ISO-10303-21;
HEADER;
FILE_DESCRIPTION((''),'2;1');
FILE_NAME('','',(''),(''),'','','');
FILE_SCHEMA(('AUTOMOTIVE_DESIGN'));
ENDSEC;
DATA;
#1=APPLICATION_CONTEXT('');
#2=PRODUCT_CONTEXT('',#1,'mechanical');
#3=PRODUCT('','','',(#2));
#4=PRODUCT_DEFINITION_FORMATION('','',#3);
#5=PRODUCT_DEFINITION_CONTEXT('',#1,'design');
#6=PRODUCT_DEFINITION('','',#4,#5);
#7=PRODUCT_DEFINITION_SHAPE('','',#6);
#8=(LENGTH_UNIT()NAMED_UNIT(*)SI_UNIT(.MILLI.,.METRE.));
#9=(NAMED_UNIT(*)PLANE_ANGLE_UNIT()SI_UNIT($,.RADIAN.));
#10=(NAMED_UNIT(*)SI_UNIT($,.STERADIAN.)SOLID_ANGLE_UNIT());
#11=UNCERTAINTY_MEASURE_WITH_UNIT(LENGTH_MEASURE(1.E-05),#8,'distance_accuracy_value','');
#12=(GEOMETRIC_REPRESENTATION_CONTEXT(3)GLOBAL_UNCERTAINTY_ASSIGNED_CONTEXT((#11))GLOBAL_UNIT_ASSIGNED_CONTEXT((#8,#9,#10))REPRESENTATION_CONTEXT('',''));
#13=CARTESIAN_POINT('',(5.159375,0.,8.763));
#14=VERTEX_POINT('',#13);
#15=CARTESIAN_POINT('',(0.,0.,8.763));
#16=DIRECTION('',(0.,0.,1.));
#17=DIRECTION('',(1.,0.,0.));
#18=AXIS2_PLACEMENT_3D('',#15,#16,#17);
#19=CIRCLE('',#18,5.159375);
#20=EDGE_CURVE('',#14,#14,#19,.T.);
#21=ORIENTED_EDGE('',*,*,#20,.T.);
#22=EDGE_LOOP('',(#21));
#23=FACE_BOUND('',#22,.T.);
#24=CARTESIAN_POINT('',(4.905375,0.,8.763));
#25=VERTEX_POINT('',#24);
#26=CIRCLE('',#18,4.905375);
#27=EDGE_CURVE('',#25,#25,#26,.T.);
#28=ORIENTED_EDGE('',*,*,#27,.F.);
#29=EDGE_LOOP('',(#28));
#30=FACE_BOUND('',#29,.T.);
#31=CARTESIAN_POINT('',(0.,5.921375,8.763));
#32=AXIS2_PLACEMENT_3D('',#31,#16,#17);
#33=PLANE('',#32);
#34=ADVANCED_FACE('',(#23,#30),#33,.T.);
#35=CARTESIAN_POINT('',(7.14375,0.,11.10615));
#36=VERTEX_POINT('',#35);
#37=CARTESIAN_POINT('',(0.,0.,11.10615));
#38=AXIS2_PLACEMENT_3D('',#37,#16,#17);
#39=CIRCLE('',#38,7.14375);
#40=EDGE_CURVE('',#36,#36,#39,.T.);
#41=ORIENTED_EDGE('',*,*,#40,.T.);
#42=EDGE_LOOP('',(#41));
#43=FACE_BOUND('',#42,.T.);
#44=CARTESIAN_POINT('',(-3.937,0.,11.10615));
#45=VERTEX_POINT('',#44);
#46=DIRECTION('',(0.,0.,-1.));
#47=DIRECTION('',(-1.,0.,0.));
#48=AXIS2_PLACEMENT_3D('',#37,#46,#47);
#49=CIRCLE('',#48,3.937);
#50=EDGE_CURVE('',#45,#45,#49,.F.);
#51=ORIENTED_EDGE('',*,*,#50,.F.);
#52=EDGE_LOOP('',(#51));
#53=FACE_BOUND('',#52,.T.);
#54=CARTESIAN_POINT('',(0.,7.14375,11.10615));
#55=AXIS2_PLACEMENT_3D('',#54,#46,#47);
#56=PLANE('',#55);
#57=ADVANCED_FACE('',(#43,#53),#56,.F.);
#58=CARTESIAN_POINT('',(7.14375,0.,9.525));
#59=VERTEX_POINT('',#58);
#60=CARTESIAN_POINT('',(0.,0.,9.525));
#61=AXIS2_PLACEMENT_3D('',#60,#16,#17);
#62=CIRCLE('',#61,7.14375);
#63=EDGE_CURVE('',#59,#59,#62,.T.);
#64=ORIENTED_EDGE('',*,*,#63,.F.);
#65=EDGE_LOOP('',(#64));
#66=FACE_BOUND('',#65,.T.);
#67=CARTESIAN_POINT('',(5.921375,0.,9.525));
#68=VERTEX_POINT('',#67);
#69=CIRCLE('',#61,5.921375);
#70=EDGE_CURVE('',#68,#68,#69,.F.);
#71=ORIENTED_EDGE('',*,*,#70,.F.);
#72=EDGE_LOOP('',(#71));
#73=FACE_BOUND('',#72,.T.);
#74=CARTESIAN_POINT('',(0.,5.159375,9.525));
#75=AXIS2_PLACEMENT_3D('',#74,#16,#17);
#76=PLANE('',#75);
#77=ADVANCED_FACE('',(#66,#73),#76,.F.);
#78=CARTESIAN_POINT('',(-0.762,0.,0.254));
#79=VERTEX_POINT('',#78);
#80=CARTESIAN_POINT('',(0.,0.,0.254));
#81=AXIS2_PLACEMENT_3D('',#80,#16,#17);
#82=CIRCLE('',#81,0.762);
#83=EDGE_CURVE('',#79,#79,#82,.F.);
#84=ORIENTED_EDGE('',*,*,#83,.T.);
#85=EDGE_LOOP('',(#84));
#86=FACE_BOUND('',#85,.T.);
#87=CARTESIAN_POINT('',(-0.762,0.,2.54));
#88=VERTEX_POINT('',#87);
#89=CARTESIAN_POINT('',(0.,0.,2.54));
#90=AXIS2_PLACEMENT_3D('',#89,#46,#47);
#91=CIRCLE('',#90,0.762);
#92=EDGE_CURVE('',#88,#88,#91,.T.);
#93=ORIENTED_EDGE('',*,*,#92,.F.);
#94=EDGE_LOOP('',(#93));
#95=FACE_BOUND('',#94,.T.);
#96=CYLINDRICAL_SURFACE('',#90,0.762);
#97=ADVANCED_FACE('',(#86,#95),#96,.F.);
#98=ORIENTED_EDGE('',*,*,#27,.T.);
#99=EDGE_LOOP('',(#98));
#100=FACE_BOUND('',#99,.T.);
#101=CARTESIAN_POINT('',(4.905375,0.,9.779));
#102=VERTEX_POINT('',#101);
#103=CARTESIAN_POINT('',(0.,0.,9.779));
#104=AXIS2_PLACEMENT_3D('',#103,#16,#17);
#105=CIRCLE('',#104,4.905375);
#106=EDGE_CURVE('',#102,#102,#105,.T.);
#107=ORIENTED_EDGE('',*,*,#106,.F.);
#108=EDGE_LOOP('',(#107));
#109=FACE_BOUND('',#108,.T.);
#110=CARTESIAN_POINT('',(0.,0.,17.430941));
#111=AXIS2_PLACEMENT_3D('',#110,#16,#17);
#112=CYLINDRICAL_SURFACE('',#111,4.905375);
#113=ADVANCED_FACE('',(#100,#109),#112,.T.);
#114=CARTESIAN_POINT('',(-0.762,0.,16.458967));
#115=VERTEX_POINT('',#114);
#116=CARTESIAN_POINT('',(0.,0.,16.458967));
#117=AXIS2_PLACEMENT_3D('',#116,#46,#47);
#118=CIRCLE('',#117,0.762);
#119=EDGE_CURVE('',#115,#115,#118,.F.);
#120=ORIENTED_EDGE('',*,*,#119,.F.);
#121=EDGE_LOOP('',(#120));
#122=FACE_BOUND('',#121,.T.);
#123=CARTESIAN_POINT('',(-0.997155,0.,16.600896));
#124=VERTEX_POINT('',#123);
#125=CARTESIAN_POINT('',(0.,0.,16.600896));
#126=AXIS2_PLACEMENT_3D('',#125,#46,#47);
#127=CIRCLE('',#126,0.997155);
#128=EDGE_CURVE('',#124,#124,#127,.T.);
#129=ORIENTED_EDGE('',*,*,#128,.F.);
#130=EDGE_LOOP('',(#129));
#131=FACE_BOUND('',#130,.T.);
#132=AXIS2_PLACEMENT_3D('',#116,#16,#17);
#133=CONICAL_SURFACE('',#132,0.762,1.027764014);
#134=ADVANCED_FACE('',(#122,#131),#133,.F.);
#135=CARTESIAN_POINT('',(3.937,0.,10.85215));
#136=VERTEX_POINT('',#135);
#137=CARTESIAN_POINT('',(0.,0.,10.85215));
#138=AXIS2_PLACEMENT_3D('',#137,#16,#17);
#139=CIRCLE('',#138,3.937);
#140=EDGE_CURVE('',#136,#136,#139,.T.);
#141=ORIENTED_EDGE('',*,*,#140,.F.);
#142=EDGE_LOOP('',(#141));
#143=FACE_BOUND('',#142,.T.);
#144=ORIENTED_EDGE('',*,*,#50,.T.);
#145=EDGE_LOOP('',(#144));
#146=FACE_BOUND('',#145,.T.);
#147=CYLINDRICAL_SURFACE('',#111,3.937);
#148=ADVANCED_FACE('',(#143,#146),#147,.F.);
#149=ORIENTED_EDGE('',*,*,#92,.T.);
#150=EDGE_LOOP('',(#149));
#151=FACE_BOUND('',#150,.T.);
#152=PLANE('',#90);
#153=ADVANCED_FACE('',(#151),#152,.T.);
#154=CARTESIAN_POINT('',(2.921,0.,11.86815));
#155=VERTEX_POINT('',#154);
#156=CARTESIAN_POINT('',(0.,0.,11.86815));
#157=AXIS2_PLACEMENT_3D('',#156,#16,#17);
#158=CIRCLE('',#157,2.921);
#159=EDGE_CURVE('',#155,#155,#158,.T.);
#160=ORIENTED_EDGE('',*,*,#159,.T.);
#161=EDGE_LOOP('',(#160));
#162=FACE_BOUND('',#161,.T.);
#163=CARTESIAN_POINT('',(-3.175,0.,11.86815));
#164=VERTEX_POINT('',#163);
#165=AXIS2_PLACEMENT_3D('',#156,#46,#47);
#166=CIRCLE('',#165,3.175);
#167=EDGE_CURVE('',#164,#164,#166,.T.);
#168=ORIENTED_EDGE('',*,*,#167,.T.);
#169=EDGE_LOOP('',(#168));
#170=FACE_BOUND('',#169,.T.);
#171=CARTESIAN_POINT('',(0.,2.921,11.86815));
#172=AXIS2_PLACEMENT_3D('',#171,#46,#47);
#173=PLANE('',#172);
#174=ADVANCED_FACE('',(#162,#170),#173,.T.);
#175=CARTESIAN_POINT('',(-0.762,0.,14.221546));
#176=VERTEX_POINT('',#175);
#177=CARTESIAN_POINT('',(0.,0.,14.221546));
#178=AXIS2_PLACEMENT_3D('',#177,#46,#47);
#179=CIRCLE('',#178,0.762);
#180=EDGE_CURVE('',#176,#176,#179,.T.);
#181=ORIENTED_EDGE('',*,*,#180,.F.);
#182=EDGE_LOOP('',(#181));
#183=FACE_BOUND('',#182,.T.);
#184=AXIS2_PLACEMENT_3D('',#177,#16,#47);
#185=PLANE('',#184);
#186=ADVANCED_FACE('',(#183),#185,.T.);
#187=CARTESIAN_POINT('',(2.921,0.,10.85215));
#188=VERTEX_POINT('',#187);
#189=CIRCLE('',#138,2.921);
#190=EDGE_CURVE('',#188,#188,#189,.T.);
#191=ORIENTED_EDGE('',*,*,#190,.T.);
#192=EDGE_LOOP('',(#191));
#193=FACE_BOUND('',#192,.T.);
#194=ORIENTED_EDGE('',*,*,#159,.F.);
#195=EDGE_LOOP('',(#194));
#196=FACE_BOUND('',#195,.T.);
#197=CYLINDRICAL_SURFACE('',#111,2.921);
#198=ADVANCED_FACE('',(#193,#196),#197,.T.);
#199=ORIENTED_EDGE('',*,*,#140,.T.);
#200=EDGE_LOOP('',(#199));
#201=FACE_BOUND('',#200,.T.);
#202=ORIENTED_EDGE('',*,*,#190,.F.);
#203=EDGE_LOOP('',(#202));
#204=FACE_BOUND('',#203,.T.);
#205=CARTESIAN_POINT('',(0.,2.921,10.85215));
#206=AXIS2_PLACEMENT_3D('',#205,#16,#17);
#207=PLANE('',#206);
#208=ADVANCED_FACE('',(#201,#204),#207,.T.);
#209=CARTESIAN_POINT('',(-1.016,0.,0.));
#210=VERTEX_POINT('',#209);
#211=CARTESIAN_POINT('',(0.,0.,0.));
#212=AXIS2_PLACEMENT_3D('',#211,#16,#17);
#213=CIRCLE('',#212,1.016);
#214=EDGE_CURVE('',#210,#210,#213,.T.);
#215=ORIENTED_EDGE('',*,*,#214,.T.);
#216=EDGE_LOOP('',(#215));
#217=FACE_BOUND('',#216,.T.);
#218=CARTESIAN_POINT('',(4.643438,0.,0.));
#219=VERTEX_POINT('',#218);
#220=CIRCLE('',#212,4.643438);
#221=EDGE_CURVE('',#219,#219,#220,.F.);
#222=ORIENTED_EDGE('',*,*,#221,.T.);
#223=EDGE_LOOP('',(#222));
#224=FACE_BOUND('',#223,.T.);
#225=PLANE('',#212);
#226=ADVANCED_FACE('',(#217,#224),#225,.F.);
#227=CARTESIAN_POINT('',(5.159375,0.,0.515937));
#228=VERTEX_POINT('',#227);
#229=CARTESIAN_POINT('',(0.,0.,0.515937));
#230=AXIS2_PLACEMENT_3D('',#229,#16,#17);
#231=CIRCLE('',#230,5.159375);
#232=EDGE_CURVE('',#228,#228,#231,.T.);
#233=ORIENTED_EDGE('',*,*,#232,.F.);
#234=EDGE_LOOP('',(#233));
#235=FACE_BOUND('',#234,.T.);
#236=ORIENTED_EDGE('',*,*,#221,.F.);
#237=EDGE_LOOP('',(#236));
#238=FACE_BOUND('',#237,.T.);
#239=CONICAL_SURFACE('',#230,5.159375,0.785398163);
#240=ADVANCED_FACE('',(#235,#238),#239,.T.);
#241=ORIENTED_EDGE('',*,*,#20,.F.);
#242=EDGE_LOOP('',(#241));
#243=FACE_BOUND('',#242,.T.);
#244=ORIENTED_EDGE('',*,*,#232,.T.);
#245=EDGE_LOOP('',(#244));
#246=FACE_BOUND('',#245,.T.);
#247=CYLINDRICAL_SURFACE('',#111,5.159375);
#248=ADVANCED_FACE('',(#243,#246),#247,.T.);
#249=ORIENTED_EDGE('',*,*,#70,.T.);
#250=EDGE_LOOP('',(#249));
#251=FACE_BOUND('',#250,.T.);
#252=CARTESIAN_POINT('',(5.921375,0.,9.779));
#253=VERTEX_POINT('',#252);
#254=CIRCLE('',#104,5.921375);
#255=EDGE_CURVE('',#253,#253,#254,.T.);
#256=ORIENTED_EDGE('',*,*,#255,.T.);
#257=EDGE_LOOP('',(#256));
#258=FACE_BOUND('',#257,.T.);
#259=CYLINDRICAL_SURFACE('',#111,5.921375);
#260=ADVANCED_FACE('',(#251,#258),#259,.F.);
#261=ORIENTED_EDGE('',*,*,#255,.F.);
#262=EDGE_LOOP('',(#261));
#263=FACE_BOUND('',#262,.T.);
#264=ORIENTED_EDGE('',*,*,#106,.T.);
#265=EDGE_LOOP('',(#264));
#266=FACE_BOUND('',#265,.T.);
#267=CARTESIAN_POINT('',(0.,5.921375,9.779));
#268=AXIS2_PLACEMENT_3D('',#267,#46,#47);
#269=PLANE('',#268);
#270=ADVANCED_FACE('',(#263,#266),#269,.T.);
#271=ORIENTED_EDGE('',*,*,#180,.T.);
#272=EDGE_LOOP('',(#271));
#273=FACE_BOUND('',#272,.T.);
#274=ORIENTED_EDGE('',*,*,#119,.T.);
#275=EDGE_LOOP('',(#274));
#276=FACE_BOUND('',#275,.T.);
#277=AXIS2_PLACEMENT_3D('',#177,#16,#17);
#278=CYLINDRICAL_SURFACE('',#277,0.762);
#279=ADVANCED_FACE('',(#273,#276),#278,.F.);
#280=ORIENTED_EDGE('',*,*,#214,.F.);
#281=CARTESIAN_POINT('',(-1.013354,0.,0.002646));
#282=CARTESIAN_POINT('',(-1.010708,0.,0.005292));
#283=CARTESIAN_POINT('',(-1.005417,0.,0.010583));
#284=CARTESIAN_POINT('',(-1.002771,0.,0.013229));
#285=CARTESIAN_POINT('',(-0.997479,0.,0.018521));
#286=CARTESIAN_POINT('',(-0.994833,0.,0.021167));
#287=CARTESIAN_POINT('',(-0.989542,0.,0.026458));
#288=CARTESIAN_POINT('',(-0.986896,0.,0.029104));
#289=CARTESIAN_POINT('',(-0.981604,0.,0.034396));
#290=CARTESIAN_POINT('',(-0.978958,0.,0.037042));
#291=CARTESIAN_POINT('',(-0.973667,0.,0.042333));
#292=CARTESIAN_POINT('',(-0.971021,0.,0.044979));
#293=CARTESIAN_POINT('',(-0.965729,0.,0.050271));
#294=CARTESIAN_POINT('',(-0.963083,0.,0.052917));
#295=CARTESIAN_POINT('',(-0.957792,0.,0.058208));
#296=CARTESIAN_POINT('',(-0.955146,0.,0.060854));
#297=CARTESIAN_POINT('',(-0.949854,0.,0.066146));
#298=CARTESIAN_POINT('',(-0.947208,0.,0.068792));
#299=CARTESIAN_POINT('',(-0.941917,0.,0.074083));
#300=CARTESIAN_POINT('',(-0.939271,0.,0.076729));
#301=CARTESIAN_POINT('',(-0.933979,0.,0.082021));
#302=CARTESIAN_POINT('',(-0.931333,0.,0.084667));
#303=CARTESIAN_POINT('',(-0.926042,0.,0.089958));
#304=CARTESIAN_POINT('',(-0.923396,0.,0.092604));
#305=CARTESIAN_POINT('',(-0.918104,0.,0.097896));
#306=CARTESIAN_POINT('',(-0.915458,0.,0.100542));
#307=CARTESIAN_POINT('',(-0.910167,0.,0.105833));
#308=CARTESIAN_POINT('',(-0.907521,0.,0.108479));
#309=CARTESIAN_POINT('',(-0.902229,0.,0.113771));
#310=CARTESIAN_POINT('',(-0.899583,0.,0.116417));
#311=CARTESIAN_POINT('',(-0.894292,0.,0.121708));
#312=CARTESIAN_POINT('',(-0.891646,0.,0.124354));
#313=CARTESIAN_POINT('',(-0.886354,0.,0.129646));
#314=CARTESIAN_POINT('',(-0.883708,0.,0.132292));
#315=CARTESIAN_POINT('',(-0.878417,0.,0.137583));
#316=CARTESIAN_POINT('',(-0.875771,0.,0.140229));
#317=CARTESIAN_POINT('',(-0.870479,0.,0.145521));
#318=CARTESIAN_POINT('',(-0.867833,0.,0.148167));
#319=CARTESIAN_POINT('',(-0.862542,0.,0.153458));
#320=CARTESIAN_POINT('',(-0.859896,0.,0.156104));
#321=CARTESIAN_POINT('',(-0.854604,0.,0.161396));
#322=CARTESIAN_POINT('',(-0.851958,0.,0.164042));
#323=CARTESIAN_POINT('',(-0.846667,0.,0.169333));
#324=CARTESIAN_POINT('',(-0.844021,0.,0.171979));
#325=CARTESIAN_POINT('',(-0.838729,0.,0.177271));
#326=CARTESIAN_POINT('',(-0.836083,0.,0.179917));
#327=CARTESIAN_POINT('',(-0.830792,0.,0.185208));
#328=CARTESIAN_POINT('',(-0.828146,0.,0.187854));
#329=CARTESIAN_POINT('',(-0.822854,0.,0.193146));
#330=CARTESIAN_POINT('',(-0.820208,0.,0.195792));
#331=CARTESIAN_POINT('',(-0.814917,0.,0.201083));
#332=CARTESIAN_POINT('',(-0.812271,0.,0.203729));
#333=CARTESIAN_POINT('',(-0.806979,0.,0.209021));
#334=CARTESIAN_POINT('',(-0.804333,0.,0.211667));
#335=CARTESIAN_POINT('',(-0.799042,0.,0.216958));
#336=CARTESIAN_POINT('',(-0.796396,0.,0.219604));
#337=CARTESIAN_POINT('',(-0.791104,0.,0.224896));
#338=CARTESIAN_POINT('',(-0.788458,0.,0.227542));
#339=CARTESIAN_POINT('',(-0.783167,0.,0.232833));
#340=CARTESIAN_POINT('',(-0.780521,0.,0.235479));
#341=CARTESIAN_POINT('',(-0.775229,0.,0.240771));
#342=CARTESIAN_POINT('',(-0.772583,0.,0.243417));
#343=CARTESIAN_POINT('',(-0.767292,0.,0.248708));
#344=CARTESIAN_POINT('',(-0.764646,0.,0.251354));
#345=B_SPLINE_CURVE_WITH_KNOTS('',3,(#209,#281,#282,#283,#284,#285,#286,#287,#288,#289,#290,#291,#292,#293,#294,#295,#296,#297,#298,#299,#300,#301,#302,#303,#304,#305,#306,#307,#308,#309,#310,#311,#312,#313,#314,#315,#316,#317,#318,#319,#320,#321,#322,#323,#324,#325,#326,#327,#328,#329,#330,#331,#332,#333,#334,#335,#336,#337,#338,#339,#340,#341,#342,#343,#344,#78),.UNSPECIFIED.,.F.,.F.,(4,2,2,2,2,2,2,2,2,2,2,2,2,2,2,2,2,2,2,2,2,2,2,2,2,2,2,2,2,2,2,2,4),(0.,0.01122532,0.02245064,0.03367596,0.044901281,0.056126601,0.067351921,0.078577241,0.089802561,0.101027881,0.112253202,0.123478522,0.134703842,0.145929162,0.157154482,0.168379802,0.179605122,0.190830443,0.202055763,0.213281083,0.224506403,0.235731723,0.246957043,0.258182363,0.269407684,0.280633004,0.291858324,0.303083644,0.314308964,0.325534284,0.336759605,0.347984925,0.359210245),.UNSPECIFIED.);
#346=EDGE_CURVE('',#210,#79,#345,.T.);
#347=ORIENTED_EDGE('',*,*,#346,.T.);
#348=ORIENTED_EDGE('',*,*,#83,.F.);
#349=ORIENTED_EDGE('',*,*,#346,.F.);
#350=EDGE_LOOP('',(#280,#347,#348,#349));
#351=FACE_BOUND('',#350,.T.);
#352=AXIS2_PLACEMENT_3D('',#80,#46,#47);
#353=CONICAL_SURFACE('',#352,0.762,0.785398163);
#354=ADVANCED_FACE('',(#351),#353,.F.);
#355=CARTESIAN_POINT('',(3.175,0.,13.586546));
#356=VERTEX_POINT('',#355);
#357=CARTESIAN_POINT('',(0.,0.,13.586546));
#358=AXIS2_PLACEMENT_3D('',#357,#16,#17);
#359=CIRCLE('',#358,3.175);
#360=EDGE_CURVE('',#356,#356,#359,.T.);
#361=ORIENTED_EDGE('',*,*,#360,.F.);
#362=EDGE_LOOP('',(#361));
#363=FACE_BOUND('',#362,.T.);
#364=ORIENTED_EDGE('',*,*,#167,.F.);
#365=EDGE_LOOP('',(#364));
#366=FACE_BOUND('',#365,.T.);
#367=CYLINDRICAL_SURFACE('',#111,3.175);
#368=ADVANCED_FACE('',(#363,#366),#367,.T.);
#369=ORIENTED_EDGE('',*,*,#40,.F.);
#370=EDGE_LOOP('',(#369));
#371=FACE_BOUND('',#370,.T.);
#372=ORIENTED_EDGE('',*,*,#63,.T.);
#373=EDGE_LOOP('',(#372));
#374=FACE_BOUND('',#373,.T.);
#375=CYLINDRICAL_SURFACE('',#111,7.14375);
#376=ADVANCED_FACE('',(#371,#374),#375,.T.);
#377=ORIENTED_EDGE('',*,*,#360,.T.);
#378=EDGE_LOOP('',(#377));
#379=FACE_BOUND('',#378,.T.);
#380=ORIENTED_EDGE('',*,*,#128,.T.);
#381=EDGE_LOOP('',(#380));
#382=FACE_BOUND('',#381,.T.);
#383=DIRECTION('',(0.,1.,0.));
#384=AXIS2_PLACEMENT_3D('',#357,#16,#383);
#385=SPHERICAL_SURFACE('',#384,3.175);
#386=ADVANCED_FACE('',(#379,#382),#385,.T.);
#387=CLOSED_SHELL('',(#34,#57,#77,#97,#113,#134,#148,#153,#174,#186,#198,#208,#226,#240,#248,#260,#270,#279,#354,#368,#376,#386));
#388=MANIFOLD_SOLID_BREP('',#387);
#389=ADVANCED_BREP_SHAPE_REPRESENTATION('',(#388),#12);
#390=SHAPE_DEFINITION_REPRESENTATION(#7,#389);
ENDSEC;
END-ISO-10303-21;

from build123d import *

# Parameters (mm, degrees)
SKETCH3_W          = 1.016
SKETCH3_H          = 1.016
CHAMFER1_SIZE      = 0.5159375
SKETCH2_R          = 0.762
CUT_EXTRUDE1_DEPTH = 2.54
CHAMFER2_SIZE      = 0.254
CHAMFER2_SIZE_2    = 0.209783356


with BuildPart() as part:
    # Sketch1 → Revolve1 (revolve)
    with BuildSketch(Plane(origin=(0, 0, 0), x_dir=(0, 0, -1), z_dir=(1, 0, 0)), mode=Mode.PRIVATE) as revolve1_sk:
        with BuildLine():
            Line((0, 0), (0, 5.159375))
            Line((0, 5.159375), (-9.525, 5.159375))
            Line((-9.525, 5.159375), (-9.525, 7.14375))
            Line((-9.525, 7.14375), (-11.10615, 7.14375))
            Line((-11.10615, 7.14375), (-11.10615, 3.175))
            Line((-11.10615, 3.175), (-13.586546081, 3.175))
            ThreePointArc((-13.586546081, 3.175), (-15.831610111, 2.24506403), (-16.761546081, 0))
            Line((-16.761546081, 0), (0, 0))
        make_face()
    revolve(revolve1_sk.sketch.rotate(Axis((0, 0, 17.430941175), (0, 0, -1)), 90), axis=Axis((0, 0, 17.430941175), (0, 0, -1)))

    # Sketch3 → Cut-Revolve1 (revolve, cut)
    with BuildSketch(Plane(origin=(0, 0, 0), x_dir=(0, 0, -1), z_dir=(1, 0, 0)), mode=Mode.PRIVATE) as cut_revolve1_sk:
        with Locations((-11.36015, 3.429)):
            Rectangle(SKETCH3_W, SKETCH3_H)
        with Locations((-9.271, 5.413375)):
            Rectangle(SKETCH3_W, SKETCH3_H)
    revolve(cut_revolve1_sk.sketch.rotate(Axis((0, 0, 17.430941175), (0, 0, -1)), 90), axis=Axis((0, 0, 17.430941175), (0, 0, -1)), mode=Mode.SUBTRACT)

    # Chamfer1
    chamfer1_edges = [part.edges().sort_by_distance(p)[0] for p in [
        (-5.159375, 0, 0),
    ]]
    chamfer(chamfer1_edges, length=CHAMFER1_SIZE)

    # Sketch2 → Cut-Extrude1 (cut)
    with BuildSketch(Plane(origin=(0, 0, 0), x_dir=(-1, 0, 0), z_dir=(0, 0, -1))):
        Circle(SKETCH2_R)
    cut_extrude1 = extrude(amount=-CUT_EXTRUDE1_DEPTH, mode=Mode.SUBTRACT)

    # Mirror1: Cut-Extrude1 across plane
    add(cut_extrude1.mirror(Plane.XY.offset(8.38077304)), mode=Mode.SUBTRACT)

    # Chamfer2
    # the kernel refuses this chamfer: 0.254, 0.209783356 mm, written as the material it takes off along each edge
    with BuildSketch(Plane(origin=(0, 0, 0), x_dir=(-1, 0, 0), z_dir=(0, -1, 0))) as chamfer2_piece_1:
        Polygon((0.762 + CHAMFER2_SIZE, 0), (0.762, -CHAMFER2_SIZE), (0.762, 0), align=None)
    revolve(axis=Axis((0, 0, 0), (0, 0, -1)), mode=Mode.SUBTRACT)
    with BuildSketch(Plane(origin=(0, 0, 16.66875), x_dir=(-1, 0, 0), z_dir=(0, 1, 0))) as chamfer2_piece_2:
        with BuildLine():
            Line((0.997154658, -0.067853643), (0.762, -CHAMFER2_SIZE_2))
            Line((0.762, -CHAMFER2_SIZE_2), (0.762, 0))
            ThreePointArc((0.762, 0), (0.883545152, -0.032618216), (0.997154658, -0.067853643))
        make_face()
    revolve(axis=Axis((0, 0, 16.66875), (0, 0, 1)), revolution_arc=180, mode=Mode.SUBTRACT)
    with BuildSketch(Plane(origin=(0, 0, 16.66875), x_dir=(1, 0, 0), z_dir=(0, -1, 0))) as chamfer2_piece_3:
        with BuildLine():
            Line((0.997154658, -0.067853643), (0.762, -CHAMFER2_SIZE_2))
            Line((0.762, -CHAMFER2_SIZE_2), (0.762, 0))
            ThreePointArc((0.762, 0), (0.883545152, -0.032618216), (0.997154658, -0.067853643))
        make_face()
    revolve(axis=Axis((0, 0, 16.66875), (0, 0, 1)), revolution_arc=180, mode=Mode.SUBTRACT)


solid = part.part
